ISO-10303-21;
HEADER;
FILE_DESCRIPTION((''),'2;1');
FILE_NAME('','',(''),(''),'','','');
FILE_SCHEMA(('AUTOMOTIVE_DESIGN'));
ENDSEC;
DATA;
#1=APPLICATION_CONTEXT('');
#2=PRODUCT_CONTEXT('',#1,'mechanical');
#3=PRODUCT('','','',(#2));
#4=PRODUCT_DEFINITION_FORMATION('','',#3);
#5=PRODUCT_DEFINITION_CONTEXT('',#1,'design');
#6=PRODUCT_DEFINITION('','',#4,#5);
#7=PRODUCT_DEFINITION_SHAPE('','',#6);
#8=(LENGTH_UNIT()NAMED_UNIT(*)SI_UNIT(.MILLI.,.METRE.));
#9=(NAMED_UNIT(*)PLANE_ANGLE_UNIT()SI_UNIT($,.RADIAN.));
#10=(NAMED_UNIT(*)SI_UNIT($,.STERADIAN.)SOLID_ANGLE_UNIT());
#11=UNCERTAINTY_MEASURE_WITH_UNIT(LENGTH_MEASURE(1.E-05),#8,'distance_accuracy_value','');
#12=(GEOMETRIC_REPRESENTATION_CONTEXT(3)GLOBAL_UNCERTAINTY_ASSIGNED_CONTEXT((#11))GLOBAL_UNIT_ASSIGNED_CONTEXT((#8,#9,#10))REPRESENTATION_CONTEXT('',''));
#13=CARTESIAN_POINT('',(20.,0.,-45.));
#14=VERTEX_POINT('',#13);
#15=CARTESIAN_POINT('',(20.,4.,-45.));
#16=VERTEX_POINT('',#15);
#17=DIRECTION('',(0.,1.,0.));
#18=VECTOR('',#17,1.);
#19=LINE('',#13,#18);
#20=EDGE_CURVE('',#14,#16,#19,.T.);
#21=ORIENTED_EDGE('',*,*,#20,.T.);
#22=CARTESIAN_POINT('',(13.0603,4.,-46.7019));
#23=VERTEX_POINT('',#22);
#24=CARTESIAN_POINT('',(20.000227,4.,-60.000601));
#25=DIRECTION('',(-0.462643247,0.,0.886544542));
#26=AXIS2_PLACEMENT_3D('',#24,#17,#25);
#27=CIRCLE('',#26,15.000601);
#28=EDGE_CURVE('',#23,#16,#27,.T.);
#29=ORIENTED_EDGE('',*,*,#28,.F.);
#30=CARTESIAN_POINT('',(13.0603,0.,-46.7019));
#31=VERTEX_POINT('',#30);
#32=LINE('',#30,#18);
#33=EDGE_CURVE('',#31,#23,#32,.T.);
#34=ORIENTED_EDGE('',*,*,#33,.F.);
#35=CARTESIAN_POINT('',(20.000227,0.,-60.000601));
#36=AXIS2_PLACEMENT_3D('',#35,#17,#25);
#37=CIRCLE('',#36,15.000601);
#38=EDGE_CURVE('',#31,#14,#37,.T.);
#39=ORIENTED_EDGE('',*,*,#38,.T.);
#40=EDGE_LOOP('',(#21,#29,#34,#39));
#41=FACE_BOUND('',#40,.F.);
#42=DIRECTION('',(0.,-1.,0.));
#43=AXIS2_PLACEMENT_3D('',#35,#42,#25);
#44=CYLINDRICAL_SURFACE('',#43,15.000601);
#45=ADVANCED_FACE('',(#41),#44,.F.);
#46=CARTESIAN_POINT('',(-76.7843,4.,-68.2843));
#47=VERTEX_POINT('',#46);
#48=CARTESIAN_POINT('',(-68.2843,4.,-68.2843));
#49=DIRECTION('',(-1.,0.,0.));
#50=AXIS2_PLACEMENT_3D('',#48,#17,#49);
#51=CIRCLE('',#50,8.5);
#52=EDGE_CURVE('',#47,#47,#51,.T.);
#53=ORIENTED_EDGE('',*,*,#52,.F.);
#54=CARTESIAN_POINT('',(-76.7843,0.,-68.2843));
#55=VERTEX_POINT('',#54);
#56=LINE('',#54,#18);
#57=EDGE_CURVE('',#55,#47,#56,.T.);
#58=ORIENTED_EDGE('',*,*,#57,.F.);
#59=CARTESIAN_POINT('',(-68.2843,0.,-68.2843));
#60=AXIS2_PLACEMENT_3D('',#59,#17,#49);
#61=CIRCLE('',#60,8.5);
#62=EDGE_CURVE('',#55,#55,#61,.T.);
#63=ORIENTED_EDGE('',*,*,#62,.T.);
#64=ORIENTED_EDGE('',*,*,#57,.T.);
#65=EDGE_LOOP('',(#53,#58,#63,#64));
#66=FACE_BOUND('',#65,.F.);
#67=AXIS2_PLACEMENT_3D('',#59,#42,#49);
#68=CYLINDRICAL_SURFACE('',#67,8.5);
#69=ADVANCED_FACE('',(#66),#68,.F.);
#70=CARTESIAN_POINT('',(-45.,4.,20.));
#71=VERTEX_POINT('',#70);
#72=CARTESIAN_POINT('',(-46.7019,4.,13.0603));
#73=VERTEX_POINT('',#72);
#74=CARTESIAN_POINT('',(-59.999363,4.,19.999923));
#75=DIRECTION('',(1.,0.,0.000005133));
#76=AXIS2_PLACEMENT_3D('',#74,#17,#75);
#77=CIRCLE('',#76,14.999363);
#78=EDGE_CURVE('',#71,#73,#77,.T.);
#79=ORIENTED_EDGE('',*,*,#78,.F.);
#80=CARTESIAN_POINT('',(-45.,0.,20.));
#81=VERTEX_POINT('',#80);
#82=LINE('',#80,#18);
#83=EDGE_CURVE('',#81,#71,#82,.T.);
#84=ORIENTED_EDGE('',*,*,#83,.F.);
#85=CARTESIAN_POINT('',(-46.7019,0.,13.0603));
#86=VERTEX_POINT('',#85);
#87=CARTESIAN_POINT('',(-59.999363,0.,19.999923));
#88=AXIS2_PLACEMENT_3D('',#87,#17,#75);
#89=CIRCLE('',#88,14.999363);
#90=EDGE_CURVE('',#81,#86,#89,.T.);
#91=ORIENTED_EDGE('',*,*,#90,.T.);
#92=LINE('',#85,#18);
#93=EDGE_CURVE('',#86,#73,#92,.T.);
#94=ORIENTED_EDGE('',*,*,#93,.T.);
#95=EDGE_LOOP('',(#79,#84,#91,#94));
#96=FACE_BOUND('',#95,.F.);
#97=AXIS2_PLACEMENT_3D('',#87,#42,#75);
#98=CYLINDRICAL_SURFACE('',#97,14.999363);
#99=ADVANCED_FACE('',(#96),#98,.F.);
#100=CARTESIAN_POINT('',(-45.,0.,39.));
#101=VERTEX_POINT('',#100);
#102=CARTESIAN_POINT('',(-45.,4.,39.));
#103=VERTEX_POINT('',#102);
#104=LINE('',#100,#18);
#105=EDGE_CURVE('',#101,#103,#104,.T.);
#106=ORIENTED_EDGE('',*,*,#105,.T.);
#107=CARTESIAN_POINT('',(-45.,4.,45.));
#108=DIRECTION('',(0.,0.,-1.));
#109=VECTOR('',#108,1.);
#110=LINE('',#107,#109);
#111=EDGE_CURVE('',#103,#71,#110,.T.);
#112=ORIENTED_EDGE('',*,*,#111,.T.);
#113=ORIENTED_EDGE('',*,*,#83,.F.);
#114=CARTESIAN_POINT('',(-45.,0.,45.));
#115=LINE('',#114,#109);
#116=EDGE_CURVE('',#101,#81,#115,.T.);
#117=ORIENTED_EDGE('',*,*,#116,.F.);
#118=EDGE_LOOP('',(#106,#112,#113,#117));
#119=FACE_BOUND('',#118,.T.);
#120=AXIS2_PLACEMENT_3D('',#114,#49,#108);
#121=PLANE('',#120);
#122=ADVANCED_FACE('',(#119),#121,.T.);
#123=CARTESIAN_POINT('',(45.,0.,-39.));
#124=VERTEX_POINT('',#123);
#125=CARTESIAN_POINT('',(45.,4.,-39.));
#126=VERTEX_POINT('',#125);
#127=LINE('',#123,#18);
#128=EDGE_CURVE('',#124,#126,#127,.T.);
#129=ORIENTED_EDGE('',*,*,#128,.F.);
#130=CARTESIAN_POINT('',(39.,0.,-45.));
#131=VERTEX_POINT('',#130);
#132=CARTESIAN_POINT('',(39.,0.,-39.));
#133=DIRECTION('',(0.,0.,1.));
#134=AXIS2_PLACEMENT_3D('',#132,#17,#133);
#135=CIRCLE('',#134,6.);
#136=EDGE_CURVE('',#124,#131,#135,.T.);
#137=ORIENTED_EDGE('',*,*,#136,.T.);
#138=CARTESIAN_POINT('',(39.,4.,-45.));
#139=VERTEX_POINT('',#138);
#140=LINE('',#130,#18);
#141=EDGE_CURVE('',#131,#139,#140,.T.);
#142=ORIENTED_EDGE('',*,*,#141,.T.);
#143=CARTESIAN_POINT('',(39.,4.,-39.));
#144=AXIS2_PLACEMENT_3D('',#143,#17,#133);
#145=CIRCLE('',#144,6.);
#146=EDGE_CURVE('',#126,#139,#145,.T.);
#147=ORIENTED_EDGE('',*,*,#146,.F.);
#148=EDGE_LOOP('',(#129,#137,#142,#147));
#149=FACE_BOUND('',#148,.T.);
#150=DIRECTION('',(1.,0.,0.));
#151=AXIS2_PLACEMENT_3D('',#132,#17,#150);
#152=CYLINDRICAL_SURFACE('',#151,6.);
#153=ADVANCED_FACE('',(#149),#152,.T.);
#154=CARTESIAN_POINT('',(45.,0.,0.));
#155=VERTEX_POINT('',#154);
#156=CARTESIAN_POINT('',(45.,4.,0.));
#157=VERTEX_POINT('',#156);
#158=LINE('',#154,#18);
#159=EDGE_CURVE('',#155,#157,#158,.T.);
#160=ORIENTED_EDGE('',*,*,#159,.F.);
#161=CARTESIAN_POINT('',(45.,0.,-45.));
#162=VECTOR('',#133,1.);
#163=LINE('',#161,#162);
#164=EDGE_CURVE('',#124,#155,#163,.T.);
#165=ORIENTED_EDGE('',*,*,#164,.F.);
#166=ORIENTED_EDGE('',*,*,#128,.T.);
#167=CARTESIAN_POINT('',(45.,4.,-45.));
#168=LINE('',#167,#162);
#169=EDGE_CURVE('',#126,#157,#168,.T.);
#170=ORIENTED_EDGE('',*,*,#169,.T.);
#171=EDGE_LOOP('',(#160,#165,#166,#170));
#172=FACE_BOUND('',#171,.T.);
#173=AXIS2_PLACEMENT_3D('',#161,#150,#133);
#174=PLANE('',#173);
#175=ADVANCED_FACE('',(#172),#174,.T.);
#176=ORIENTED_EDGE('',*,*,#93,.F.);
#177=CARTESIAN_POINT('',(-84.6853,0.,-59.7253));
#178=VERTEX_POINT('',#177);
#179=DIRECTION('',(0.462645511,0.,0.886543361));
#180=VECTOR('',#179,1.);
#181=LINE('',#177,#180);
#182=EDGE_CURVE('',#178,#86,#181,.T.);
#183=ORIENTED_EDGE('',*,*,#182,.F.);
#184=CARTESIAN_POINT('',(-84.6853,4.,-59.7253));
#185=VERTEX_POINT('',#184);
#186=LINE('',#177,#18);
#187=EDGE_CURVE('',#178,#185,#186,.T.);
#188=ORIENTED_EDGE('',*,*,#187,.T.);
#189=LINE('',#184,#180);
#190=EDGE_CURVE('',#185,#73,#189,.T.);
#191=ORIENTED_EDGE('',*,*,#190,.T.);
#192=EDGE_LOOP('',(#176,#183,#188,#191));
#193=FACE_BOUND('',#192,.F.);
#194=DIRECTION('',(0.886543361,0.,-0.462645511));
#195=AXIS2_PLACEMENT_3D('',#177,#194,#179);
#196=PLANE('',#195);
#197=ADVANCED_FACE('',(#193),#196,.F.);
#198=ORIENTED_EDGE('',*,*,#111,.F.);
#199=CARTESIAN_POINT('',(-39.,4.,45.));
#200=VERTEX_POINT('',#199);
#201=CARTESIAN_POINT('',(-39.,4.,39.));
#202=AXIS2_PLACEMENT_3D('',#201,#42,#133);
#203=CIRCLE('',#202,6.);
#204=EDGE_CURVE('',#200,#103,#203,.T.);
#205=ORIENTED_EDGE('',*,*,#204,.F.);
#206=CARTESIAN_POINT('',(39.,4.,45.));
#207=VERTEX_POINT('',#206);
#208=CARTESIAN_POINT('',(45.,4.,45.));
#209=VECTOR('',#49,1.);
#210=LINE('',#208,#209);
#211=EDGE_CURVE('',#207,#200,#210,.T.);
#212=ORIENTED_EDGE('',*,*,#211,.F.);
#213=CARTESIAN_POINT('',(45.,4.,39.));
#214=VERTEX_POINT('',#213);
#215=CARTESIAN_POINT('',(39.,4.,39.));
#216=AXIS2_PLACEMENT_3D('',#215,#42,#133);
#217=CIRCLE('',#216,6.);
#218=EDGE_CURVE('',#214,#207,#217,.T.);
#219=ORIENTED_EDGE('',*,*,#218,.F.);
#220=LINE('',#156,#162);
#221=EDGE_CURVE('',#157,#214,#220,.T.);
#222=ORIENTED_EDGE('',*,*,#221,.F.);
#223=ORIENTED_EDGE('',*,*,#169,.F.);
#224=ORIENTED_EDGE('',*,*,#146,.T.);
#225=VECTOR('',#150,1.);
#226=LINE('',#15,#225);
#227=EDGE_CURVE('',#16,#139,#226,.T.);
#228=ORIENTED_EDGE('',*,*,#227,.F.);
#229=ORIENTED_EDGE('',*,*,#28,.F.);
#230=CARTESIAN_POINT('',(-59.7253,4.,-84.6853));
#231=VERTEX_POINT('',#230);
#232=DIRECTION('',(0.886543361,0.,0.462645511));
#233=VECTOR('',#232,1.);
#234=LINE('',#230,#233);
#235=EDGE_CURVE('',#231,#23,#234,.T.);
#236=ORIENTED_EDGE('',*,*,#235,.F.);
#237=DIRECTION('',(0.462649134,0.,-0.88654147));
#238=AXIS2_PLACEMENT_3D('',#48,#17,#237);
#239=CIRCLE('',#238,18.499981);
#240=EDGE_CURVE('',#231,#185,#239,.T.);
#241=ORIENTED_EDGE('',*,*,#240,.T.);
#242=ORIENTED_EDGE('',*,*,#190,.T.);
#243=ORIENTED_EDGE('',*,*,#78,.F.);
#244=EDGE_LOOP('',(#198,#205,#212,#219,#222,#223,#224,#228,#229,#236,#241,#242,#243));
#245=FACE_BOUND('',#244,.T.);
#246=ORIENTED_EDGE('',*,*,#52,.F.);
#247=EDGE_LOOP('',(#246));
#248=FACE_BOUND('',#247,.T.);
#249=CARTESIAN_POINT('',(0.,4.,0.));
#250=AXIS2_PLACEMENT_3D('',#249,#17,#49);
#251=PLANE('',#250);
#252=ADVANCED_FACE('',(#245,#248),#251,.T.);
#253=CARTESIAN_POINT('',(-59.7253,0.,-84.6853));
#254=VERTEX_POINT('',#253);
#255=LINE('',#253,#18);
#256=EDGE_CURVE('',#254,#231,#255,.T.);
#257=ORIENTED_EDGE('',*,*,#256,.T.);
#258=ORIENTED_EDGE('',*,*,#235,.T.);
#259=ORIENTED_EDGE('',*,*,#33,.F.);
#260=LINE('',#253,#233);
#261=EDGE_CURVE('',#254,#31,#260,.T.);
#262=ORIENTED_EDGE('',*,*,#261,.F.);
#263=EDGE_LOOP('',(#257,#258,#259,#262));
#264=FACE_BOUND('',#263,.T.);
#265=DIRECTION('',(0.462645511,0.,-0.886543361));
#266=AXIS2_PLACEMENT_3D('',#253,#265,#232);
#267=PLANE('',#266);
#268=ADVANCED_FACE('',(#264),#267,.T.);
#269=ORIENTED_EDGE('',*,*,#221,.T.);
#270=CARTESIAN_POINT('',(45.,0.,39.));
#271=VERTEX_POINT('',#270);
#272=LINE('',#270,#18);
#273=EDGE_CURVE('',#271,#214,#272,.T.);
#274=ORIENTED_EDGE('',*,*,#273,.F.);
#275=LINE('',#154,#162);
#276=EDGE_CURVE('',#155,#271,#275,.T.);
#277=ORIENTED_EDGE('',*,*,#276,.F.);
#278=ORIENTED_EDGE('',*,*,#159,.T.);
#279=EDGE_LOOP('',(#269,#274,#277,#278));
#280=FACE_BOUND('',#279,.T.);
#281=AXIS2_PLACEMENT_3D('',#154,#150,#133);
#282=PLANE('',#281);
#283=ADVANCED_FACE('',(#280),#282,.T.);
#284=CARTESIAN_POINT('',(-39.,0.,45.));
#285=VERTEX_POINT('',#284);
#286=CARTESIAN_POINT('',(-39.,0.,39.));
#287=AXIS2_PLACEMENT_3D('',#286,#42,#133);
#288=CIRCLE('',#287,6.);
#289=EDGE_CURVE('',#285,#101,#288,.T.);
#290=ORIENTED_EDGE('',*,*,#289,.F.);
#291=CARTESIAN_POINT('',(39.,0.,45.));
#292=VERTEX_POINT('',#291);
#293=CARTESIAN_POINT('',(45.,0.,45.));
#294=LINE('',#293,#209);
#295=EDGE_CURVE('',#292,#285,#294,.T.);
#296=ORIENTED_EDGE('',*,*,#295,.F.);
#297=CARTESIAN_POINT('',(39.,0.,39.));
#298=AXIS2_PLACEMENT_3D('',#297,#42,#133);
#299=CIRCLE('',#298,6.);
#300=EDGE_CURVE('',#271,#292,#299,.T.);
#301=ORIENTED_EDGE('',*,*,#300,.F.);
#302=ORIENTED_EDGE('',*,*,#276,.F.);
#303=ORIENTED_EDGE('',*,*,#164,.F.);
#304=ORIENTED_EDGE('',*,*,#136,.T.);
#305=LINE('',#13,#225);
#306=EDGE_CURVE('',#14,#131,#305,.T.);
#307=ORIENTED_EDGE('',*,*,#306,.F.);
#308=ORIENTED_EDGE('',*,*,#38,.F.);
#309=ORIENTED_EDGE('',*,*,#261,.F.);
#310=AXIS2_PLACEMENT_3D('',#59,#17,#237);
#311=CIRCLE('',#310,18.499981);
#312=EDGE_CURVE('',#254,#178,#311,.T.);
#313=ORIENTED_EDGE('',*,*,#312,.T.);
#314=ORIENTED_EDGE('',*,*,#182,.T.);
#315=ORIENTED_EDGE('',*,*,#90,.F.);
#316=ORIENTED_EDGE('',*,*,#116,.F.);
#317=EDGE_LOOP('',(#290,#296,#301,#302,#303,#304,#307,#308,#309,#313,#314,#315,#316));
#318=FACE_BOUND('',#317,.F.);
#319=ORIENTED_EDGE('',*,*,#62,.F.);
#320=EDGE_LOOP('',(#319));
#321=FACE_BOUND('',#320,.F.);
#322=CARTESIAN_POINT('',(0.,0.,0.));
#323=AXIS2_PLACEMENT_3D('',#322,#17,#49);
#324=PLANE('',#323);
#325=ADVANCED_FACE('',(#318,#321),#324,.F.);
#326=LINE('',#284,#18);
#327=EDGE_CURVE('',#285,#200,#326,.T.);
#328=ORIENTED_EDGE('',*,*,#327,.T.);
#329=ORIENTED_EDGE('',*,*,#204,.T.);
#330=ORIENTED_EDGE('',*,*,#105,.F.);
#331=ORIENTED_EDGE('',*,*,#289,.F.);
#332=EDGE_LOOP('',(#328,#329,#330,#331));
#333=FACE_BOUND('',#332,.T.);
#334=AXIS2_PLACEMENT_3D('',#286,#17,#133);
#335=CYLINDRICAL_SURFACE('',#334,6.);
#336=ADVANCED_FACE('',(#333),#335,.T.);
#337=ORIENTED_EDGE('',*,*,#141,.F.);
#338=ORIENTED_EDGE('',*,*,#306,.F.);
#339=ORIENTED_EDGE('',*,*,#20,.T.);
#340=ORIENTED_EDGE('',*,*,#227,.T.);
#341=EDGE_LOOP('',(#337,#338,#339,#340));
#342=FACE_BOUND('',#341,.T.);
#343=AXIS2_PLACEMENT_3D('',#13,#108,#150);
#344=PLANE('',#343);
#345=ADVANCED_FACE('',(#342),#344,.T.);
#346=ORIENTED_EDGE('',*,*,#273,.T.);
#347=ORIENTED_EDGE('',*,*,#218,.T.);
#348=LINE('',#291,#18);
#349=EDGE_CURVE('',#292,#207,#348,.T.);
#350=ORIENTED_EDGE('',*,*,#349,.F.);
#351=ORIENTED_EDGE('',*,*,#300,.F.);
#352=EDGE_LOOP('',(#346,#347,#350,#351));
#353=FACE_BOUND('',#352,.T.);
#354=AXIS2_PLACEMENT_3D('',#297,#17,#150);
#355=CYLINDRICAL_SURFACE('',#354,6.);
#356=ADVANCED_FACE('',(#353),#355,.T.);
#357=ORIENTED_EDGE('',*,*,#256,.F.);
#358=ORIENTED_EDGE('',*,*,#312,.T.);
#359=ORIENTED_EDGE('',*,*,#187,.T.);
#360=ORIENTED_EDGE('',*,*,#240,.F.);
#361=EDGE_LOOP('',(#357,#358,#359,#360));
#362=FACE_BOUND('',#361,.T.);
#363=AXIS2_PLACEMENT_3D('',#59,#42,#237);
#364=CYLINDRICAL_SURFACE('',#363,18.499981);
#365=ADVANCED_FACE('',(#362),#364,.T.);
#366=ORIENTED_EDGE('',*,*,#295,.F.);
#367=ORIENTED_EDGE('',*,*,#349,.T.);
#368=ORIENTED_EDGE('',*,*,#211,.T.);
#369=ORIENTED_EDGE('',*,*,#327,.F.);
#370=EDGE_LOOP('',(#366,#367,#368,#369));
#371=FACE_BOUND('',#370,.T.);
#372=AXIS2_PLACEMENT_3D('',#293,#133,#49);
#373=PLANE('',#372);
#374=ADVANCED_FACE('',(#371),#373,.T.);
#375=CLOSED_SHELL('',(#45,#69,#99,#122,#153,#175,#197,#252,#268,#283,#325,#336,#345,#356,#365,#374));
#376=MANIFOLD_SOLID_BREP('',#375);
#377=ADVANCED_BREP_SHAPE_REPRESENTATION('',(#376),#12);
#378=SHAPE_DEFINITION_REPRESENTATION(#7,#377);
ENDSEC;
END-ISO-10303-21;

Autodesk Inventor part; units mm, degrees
ref_plane "YZ Plane" through (0, 0, 0) normal (1, 0, 0) x (0, 1, 0)
ref_plane "XZ Plane" through (0, 0, 0) normal (0, 1, 0) x (-1, 0, 0)
ref_plane "XY Plane" through (0, 0, 0) normal (0, 0, 1) x (1, 0, 0)
sketch "Sketch1" plane through (0, 0, 0) normal (0, 1, 0) x (-1, 0, 0)
  line L0 (40, 40) -> (-40, 40) construction
  line L1 (-40, 40) -> (-40, -40) construction
  line L2 (-40, -40) -> (40, -40) construction
  line L3 (40, -40) -> (40, 40) construction
  line L4 (-40, 40) -> (40, -40) construction
  line L5 (0, 40) -> (0, -40) construction
  line L6 (-45, -45) -> (-45, 0)
  line L7 (-20, -45) -> (-45, -45)
  arc A0 (59.7253, -84.6853) -> (84.6853, -59.7253) centre (68.2843, -68.2843) ccw
  circle A1 centre (68.2843, -68.2843) radius 8.5
  line L8 (59.7253, -84.6853) -> (-13.0603, -46.7019)
  arc A2 (-13.0603, -46.7019) -> (-20, -45) centre (-20, -60) ccw
  arc A3 (84.6853, -59.7253) -> (59.7253, -84.6853) centre (68.2843, -68.2843) ccw construction
  line L9 (84.6853, -59.7253) -> (46.7019, 13.0603)
  line L10 (-45, 0) -> (-45, 45)
  line L11 (-45, 45) -> (45, 45)
  line L12 (45, 45) -> (45, 20)
  arc A4 (45, 20) -> (46.7019, 13.0603) centre (60, 20) ccw
  line L13 (40, 0) -> (45, 0) construction
  line L14 (0, 40) -> (0, 45) construction
  line L15 (-40, 0) -> (-45, 0) construction
  point P0 (0, 0)
  point P1 (0, 0)
  point P2 (0, 0)
  dimension "d2" = 80
  dimension "d3" = 80
  dimension "d29" = 5
  dimension "d30" = 17
  dimension "d31" = 10
  dimension "d32" = 40
  dimension "d34" = 5
  dimension "d35" = 15
  dimension "d36" = 25
extrude "Plate1" add sketch "Sketch1" along normal blind 4
fillet "Corner Round3" radius 6 3 edges at (-45, 2, 45) (45, 2, 45) (45, 2, -45)
equation "\"d34\" = d29"
equation "\"d6\" = Thickness"
equation "\"Thickness\" = 4"
properties part number "MSC 901 BASE PLATE" material "Stainless Steel"
